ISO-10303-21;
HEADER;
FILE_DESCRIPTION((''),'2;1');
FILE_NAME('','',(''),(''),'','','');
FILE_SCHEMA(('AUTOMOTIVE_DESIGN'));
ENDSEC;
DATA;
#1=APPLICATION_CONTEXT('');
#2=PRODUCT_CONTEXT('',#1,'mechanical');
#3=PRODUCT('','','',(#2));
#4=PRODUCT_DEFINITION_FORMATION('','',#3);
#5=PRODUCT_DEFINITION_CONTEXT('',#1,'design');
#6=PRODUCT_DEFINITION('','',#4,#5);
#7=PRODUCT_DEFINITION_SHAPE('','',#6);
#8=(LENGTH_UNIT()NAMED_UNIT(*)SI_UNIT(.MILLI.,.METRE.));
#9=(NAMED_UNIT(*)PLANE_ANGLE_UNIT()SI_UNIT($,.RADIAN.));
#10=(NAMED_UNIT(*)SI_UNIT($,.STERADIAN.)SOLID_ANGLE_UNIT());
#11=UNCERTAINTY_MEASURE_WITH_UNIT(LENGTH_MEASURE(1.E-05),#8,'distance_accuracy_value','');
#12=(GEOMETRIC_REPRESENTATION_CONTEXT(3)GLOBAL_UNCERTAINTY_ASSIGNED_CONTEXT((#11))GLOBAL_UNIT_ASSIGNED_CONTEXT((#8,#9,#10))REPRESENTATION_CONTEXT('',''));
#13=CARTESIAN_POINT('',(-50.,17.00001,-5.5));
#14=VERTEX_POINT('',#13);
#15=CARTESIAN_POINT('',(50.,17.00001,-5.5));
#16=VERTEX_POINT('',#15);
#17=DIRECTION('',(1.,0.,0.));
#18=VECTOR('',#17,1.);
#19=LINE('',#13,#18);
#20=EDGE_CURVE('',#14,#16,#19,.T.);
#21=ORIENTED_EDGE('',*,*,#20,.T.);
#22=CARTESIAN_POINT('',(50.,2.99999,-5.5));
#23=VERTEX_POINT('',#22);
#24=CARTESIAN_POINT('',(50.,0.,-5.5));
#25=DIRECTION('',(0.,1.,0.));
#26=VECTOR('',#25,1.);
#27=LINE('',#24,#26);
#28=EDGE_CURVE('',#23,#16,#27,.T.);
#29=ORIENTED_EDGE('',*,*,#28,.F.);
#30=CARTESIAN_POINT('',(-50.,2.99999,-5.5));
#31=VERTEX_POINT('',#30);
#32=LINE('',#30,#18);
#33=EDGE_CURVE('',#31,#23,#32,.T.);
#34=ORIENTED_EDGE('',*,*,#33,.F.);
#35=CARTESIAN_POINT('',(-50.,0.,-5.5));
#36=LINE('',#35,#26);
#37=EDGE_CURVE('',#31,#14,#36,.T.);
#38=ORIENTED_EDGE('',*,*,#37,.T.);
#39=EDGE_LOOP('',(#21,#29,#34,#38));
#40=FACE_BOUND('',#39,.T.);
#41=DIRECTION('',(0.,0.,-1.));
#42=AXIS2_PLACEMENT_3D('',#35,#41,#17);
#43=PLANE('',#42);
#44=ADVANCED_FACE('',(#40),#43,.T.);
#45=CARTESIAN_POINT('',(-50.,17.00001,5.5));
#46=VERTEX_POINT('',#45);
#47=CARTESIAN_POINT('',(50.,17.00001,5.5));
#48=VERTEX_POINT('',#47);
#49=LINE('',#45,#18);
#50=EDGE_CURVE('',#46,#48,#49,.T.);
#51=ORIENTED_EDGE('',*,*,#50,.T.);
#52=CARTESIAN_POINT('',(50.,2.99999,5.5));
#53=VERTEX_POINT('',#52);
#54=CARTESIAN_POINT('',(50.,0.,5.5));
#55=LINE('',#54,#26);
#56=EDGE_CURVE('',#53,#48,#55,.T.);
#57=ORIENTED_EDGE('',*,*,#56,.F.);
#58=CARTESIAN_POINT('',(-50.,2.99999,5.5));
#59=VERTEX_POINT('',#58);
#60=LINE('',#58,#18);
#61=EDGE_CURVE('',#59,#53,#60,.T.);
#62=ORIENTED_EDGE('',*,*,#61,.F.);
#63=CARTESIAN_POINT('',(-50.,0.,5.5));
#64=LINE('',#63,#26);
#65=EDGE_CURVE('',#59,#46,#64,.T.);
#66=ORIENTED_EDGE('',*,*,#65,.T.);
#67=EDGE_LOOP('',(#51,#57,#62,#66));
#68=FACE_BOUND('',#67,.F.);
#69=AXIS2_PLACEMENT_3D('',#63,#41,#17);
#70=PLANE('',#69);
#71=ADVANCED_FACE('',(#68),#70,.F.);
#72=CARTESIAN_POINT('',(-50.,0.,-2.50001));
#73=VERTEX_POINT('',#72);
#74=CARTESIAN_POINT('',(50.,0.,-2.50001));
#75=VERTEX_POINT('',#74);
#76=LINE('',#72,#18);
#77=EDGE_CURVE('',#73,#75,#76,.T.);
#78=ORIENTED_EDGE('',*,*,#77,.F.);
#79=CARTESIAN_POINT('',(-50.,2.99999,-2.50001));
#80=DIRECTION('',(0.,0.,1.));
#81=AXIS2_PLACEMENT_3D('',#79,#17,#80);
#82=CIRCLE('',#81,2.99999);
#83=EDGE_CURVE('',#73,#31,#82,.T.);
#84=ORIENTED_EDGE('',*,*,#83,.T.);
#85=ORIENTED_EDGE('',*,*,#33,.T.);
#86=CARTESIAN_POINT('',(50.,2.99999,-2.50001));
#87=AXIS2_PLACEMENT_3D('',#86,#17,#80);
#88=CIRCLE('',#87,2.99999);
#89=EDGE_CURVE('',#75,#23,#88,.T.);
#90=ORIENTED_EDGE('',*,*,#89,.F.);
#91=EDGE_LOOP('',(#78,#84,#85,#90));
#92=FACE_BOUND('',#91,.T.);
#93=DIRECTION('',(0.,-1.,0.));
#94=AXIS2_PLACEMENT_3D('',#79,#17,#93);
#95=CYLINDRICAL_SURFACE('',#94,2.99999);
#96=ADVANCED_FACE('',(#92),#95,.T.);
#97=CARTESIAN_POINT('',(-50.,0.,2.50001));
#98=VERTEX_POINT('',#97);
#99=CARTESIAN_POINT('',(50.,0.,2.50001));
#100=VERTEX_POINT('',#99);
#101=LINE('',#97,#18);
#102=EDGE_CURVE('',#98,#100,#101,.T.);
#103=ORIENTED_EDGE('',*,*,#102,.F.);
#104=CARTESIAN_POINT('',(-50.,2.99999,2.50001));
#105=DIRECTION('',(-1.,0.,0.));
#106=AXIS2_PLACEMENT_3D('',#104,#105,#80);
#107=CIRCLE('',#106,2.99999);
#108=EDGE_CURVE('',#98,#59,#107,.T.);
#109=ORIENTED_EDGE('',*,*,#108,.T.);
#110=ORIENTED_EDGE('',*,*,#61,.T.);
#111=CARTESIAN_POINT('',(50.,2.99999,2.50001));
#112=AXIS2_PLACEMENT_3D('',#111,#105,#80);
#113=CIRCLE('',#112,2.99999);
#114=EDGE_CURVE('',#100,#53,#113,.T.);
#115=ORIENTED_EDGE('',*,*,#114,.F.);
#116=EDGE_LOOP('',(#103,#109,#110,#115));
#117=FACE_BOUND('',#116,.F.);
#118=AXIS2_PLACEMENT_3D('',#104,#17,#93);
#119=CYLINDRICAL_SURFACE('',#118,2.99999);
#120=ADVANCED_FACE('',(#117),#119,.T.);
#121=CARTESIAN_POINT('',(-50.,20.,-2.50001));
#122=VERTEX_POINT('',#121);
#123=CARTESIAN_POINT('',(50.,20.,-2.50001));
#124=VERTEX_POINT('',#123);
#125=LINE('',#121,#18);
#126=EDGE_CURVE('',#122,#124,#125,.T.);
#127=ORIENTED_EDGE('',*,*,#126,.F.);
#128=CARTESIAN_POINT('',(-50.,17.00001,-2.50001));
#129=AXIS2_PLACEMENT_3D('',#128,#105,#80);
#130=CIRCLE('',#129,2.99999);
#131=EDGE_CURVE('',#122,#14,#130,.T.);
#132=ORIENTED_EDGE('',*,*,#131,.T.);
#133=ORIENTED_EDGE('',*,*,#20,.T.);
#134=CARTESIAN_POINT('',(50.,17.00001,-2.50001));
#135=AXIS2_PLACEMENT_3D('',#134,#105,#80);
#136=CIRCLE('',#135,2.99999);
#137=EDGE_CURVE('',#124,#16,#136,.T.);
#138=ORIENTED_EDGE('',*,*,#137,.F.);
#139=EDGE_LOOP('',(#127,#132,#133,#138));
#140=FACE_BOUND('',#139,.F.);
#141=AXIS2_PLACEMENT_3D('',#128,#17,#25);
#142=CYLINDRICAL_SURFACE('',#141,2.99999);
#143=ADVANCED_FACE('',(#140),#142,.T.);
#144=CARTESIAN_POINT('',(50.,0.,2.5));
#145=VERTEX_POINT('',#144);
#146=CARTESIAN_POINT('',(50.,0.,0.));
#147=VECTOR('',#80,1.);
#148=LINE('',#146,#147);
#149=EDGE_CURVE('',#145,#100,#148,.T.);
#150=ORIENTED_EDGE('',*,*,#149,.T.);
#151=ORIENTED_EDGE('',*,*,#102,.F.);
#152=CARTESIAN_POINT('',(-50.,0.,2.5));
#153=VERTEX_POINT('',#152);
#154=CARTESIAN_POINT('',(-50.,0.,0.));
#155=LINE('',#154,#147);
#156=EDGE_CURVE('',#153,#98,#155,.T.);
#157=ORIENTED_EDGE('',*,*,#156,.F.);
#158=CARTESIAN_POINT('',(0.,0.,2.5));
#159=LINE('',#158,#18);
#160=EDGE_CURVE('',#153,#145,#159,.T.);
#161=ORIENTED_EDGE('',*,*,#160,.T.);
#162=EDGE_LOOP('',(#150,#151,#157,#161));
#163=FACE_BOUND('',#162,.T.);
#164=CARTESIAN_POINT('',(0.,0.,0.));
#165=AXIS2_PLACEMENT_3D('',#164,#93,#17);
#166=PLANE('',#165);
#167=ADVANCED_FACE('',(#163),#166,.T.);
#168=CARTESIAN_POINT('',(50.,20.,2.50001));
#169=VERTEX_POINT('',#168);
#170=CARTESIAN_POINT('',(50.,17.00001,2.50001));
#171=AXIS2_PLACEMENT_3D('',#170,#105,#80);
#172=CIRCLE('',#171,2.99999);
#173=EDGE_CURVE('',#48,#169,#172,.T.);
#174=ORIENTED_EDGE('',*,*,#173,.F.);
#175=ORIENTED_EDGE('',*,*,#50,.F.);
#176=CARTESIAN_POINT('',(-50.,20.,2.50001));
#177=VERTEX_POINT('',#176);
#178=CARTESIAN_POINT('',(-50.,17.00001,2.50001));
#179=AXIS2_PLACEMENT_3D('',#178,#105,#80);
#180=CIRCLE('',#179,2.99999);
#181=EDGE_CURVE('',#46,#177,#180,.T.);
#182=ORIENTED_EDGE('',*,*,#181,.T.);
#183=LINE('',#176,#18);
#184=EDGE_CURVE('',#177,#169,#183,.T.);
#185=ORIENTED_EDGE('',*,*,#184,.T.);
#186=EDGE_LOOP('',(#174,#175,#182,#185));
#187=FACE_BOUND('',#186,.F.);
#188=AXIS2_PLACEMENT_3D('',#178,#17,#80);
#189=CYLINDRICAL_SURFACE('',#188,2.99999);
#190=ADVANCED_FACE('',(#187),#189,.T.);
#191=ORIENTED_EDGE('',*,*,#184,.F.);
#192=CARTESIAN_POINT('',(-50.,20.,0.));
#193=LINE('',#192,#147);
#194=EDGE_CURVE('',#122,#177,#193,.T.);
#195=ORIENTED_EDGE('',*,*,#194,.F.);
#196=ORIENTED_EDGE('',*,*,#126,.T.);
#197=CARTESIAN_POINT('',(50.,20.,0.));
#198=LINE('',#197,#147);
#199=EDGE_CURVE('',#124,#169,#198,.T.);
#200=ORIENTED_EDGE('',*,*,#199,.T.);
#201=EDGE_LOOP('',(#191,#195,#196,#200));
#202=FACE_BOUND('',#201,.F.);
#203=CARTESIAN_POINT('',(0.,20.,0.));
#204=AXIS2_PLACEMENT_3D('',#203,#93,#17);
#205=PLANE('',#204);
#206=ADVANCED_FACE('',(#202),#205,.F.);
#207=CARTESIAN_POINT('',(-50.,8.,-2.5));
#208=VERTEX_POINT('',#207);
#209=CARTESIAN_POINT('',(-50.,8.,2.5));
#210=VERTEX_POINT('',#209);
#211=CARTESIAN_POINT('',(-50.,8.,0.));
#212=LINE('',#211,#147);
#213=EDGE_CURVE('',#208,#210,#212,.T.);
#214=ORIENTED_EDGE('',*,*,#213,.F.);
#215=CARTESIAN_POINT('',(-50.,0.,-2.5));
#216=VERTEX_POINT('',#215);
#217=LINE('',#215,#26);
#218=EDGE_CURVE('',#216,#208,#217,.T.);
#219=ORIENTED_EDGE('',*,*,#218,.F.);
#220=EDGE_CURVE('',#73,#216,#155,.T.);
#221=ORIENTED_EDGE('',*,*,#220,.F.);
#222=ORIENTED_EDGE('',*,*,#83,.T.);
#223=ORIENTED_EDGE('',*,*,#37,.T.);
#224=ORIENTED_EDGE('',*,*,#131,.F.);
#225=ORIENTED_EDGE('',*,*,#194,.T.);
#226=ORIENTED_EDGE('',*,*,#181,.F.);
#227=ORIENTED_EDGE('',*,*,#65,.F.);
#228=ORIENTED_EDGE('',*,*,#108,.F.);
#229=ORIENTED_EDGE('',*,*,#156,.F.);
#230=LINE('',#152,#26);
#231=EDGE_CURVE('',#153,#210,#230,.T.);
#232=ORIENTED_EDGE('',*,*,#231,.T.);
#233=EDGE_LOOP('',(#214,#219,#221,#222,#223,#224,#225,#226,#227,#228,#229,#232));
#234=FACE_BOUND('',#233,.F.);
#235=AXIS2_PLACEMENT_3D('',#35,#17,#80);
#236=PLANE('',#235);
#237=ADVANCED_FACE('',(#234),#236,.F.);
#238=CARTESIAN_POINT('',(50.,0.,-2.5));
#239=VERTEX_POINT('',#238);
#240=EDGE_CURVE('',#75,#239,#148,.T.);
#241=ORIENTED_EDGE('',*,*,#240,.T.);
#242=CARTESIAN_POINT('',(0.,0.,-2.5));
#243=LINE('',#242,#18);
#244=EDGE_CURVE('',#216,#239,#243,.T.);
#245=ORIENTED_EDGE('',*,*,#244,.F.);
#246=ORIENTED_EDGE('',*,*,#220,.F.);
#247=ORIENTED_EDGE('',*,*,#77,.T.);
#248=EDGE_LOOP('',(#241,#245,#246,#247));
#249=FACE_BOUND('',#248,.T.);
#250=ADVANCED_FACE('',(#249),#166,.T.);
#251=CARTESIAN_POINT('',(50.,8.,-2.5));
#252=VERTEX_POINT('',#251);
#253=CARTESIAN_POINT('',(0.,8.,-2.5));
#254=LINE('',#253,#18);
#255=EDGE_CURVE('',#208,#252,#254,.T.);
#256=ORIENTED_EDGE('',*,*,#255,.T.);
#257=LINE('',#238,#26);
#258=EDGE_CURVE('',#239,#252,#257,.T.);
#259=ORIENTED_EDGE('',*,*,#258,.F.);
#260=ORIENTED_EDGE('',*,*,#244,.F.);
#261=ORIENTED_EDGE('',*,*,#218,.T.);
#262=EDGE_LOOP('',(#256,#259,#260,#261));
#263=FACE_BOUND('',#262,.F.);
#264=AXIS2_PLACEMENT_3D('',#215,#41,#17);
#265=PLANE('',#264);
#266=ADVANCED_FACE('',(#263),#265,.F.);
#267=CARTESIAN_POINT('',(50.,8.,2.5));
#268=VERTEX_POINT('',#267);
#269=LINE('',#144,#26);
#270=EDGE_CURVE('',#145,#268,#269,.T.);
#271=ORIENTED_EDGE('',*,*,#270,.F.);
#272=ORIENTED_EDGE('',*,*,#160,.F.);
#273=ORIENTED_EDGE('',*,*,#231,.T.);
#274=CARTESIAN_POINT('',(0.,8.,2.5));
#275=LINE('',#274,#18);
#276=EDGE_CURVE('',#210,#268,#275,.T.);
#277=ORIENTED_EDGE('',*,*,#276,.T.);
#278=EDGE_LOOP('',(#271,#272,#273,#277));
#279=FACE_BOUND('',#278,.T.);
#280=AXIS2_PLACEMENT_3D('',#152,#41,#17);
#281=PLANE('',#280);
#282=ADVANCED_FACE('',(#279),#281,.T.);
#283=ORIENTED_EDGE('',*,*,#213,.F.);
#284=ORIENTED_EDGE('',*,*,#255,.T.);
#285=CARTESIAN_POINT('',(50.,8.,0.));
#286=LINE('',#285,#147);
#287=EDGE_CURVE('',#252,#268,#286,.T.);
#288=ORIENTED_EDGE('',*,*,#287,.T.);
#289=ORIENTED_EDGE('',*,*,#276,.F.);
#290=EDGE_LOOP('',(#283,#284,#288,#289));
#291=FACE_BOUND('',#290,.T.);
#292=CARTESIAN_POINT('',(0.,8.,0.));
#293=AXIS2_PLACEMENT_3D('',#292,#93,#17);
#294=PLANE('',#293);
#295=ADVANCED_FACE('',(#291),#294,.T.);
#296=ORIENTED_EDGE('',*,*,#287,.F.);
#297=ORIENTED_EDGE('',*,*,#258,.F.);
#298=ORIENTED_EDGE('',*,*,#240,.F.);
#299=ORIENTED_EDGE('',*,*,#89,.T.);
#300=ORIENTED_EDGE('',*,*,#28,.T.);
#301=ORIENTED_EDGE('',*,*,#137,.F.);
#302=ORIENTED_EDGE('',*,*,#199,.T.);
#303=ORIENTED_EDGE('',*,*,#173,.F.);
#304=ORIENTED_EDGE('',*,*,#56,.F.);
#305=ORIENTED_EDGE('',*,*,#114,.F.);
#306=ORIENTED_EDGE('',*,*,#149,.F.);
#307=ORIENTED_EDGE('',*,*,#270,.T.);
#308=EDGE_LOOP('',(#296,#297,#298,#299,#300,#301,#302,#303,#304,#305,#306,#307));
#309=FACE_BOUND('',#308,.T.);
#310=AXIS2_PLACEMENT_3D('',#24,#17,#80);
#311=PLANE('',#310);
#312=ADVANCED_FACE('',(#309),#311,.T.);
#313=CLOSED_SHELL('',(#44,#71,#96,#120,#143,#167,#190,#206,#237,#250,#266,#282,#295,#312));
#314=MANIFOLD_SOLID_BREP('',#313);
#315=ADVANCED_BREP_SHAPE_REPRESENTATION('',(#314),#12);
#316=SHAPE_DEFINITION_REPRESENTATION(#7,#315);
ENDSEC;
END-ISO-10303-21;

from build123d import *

# Parameters (mm, degrees)
F0_W     = 100
F0_H     = 11
F1_DEPTH = 20
F2_W     = 100
F2_H     = 5
F3_DEPTH = 8
F4_R     = 2.99999


# Not quite as in the source:
# - a fillet or chamfer is up to 0.001 mm smaller than in the source, because OpenCascade refuses the exact size


with BuildPart() as f1:
    # F0 (on Front) → F1 (new body)
    with BuildSketch(Plane.XZ):
        Rectangle(F0_W, F0_H)
    extrude(amount=-F1_DEPTH)

    # F2 (on face) → F3 (cut)
    with BuildSketch(Plane.XZ):
        Rectangle(F2_W, F2_H)
    extrude(amount=-F3_DEPTH, mode=Mode.SUBTRACT)

    # F4 (radius 3 in the source; OpenCascade refuses exactly that, so slightly less here)
    f4_edges = [f1.edges().sort_by_distance(p)[0] for p in [
        (0, 20, 5.5),
        (0, 20, -5.5),
        (0, 0, 5.5),
        (0, 0, -5.5),
    ]]
    fillet(f4_edges, radius=F4_R)


solid = f1.part
